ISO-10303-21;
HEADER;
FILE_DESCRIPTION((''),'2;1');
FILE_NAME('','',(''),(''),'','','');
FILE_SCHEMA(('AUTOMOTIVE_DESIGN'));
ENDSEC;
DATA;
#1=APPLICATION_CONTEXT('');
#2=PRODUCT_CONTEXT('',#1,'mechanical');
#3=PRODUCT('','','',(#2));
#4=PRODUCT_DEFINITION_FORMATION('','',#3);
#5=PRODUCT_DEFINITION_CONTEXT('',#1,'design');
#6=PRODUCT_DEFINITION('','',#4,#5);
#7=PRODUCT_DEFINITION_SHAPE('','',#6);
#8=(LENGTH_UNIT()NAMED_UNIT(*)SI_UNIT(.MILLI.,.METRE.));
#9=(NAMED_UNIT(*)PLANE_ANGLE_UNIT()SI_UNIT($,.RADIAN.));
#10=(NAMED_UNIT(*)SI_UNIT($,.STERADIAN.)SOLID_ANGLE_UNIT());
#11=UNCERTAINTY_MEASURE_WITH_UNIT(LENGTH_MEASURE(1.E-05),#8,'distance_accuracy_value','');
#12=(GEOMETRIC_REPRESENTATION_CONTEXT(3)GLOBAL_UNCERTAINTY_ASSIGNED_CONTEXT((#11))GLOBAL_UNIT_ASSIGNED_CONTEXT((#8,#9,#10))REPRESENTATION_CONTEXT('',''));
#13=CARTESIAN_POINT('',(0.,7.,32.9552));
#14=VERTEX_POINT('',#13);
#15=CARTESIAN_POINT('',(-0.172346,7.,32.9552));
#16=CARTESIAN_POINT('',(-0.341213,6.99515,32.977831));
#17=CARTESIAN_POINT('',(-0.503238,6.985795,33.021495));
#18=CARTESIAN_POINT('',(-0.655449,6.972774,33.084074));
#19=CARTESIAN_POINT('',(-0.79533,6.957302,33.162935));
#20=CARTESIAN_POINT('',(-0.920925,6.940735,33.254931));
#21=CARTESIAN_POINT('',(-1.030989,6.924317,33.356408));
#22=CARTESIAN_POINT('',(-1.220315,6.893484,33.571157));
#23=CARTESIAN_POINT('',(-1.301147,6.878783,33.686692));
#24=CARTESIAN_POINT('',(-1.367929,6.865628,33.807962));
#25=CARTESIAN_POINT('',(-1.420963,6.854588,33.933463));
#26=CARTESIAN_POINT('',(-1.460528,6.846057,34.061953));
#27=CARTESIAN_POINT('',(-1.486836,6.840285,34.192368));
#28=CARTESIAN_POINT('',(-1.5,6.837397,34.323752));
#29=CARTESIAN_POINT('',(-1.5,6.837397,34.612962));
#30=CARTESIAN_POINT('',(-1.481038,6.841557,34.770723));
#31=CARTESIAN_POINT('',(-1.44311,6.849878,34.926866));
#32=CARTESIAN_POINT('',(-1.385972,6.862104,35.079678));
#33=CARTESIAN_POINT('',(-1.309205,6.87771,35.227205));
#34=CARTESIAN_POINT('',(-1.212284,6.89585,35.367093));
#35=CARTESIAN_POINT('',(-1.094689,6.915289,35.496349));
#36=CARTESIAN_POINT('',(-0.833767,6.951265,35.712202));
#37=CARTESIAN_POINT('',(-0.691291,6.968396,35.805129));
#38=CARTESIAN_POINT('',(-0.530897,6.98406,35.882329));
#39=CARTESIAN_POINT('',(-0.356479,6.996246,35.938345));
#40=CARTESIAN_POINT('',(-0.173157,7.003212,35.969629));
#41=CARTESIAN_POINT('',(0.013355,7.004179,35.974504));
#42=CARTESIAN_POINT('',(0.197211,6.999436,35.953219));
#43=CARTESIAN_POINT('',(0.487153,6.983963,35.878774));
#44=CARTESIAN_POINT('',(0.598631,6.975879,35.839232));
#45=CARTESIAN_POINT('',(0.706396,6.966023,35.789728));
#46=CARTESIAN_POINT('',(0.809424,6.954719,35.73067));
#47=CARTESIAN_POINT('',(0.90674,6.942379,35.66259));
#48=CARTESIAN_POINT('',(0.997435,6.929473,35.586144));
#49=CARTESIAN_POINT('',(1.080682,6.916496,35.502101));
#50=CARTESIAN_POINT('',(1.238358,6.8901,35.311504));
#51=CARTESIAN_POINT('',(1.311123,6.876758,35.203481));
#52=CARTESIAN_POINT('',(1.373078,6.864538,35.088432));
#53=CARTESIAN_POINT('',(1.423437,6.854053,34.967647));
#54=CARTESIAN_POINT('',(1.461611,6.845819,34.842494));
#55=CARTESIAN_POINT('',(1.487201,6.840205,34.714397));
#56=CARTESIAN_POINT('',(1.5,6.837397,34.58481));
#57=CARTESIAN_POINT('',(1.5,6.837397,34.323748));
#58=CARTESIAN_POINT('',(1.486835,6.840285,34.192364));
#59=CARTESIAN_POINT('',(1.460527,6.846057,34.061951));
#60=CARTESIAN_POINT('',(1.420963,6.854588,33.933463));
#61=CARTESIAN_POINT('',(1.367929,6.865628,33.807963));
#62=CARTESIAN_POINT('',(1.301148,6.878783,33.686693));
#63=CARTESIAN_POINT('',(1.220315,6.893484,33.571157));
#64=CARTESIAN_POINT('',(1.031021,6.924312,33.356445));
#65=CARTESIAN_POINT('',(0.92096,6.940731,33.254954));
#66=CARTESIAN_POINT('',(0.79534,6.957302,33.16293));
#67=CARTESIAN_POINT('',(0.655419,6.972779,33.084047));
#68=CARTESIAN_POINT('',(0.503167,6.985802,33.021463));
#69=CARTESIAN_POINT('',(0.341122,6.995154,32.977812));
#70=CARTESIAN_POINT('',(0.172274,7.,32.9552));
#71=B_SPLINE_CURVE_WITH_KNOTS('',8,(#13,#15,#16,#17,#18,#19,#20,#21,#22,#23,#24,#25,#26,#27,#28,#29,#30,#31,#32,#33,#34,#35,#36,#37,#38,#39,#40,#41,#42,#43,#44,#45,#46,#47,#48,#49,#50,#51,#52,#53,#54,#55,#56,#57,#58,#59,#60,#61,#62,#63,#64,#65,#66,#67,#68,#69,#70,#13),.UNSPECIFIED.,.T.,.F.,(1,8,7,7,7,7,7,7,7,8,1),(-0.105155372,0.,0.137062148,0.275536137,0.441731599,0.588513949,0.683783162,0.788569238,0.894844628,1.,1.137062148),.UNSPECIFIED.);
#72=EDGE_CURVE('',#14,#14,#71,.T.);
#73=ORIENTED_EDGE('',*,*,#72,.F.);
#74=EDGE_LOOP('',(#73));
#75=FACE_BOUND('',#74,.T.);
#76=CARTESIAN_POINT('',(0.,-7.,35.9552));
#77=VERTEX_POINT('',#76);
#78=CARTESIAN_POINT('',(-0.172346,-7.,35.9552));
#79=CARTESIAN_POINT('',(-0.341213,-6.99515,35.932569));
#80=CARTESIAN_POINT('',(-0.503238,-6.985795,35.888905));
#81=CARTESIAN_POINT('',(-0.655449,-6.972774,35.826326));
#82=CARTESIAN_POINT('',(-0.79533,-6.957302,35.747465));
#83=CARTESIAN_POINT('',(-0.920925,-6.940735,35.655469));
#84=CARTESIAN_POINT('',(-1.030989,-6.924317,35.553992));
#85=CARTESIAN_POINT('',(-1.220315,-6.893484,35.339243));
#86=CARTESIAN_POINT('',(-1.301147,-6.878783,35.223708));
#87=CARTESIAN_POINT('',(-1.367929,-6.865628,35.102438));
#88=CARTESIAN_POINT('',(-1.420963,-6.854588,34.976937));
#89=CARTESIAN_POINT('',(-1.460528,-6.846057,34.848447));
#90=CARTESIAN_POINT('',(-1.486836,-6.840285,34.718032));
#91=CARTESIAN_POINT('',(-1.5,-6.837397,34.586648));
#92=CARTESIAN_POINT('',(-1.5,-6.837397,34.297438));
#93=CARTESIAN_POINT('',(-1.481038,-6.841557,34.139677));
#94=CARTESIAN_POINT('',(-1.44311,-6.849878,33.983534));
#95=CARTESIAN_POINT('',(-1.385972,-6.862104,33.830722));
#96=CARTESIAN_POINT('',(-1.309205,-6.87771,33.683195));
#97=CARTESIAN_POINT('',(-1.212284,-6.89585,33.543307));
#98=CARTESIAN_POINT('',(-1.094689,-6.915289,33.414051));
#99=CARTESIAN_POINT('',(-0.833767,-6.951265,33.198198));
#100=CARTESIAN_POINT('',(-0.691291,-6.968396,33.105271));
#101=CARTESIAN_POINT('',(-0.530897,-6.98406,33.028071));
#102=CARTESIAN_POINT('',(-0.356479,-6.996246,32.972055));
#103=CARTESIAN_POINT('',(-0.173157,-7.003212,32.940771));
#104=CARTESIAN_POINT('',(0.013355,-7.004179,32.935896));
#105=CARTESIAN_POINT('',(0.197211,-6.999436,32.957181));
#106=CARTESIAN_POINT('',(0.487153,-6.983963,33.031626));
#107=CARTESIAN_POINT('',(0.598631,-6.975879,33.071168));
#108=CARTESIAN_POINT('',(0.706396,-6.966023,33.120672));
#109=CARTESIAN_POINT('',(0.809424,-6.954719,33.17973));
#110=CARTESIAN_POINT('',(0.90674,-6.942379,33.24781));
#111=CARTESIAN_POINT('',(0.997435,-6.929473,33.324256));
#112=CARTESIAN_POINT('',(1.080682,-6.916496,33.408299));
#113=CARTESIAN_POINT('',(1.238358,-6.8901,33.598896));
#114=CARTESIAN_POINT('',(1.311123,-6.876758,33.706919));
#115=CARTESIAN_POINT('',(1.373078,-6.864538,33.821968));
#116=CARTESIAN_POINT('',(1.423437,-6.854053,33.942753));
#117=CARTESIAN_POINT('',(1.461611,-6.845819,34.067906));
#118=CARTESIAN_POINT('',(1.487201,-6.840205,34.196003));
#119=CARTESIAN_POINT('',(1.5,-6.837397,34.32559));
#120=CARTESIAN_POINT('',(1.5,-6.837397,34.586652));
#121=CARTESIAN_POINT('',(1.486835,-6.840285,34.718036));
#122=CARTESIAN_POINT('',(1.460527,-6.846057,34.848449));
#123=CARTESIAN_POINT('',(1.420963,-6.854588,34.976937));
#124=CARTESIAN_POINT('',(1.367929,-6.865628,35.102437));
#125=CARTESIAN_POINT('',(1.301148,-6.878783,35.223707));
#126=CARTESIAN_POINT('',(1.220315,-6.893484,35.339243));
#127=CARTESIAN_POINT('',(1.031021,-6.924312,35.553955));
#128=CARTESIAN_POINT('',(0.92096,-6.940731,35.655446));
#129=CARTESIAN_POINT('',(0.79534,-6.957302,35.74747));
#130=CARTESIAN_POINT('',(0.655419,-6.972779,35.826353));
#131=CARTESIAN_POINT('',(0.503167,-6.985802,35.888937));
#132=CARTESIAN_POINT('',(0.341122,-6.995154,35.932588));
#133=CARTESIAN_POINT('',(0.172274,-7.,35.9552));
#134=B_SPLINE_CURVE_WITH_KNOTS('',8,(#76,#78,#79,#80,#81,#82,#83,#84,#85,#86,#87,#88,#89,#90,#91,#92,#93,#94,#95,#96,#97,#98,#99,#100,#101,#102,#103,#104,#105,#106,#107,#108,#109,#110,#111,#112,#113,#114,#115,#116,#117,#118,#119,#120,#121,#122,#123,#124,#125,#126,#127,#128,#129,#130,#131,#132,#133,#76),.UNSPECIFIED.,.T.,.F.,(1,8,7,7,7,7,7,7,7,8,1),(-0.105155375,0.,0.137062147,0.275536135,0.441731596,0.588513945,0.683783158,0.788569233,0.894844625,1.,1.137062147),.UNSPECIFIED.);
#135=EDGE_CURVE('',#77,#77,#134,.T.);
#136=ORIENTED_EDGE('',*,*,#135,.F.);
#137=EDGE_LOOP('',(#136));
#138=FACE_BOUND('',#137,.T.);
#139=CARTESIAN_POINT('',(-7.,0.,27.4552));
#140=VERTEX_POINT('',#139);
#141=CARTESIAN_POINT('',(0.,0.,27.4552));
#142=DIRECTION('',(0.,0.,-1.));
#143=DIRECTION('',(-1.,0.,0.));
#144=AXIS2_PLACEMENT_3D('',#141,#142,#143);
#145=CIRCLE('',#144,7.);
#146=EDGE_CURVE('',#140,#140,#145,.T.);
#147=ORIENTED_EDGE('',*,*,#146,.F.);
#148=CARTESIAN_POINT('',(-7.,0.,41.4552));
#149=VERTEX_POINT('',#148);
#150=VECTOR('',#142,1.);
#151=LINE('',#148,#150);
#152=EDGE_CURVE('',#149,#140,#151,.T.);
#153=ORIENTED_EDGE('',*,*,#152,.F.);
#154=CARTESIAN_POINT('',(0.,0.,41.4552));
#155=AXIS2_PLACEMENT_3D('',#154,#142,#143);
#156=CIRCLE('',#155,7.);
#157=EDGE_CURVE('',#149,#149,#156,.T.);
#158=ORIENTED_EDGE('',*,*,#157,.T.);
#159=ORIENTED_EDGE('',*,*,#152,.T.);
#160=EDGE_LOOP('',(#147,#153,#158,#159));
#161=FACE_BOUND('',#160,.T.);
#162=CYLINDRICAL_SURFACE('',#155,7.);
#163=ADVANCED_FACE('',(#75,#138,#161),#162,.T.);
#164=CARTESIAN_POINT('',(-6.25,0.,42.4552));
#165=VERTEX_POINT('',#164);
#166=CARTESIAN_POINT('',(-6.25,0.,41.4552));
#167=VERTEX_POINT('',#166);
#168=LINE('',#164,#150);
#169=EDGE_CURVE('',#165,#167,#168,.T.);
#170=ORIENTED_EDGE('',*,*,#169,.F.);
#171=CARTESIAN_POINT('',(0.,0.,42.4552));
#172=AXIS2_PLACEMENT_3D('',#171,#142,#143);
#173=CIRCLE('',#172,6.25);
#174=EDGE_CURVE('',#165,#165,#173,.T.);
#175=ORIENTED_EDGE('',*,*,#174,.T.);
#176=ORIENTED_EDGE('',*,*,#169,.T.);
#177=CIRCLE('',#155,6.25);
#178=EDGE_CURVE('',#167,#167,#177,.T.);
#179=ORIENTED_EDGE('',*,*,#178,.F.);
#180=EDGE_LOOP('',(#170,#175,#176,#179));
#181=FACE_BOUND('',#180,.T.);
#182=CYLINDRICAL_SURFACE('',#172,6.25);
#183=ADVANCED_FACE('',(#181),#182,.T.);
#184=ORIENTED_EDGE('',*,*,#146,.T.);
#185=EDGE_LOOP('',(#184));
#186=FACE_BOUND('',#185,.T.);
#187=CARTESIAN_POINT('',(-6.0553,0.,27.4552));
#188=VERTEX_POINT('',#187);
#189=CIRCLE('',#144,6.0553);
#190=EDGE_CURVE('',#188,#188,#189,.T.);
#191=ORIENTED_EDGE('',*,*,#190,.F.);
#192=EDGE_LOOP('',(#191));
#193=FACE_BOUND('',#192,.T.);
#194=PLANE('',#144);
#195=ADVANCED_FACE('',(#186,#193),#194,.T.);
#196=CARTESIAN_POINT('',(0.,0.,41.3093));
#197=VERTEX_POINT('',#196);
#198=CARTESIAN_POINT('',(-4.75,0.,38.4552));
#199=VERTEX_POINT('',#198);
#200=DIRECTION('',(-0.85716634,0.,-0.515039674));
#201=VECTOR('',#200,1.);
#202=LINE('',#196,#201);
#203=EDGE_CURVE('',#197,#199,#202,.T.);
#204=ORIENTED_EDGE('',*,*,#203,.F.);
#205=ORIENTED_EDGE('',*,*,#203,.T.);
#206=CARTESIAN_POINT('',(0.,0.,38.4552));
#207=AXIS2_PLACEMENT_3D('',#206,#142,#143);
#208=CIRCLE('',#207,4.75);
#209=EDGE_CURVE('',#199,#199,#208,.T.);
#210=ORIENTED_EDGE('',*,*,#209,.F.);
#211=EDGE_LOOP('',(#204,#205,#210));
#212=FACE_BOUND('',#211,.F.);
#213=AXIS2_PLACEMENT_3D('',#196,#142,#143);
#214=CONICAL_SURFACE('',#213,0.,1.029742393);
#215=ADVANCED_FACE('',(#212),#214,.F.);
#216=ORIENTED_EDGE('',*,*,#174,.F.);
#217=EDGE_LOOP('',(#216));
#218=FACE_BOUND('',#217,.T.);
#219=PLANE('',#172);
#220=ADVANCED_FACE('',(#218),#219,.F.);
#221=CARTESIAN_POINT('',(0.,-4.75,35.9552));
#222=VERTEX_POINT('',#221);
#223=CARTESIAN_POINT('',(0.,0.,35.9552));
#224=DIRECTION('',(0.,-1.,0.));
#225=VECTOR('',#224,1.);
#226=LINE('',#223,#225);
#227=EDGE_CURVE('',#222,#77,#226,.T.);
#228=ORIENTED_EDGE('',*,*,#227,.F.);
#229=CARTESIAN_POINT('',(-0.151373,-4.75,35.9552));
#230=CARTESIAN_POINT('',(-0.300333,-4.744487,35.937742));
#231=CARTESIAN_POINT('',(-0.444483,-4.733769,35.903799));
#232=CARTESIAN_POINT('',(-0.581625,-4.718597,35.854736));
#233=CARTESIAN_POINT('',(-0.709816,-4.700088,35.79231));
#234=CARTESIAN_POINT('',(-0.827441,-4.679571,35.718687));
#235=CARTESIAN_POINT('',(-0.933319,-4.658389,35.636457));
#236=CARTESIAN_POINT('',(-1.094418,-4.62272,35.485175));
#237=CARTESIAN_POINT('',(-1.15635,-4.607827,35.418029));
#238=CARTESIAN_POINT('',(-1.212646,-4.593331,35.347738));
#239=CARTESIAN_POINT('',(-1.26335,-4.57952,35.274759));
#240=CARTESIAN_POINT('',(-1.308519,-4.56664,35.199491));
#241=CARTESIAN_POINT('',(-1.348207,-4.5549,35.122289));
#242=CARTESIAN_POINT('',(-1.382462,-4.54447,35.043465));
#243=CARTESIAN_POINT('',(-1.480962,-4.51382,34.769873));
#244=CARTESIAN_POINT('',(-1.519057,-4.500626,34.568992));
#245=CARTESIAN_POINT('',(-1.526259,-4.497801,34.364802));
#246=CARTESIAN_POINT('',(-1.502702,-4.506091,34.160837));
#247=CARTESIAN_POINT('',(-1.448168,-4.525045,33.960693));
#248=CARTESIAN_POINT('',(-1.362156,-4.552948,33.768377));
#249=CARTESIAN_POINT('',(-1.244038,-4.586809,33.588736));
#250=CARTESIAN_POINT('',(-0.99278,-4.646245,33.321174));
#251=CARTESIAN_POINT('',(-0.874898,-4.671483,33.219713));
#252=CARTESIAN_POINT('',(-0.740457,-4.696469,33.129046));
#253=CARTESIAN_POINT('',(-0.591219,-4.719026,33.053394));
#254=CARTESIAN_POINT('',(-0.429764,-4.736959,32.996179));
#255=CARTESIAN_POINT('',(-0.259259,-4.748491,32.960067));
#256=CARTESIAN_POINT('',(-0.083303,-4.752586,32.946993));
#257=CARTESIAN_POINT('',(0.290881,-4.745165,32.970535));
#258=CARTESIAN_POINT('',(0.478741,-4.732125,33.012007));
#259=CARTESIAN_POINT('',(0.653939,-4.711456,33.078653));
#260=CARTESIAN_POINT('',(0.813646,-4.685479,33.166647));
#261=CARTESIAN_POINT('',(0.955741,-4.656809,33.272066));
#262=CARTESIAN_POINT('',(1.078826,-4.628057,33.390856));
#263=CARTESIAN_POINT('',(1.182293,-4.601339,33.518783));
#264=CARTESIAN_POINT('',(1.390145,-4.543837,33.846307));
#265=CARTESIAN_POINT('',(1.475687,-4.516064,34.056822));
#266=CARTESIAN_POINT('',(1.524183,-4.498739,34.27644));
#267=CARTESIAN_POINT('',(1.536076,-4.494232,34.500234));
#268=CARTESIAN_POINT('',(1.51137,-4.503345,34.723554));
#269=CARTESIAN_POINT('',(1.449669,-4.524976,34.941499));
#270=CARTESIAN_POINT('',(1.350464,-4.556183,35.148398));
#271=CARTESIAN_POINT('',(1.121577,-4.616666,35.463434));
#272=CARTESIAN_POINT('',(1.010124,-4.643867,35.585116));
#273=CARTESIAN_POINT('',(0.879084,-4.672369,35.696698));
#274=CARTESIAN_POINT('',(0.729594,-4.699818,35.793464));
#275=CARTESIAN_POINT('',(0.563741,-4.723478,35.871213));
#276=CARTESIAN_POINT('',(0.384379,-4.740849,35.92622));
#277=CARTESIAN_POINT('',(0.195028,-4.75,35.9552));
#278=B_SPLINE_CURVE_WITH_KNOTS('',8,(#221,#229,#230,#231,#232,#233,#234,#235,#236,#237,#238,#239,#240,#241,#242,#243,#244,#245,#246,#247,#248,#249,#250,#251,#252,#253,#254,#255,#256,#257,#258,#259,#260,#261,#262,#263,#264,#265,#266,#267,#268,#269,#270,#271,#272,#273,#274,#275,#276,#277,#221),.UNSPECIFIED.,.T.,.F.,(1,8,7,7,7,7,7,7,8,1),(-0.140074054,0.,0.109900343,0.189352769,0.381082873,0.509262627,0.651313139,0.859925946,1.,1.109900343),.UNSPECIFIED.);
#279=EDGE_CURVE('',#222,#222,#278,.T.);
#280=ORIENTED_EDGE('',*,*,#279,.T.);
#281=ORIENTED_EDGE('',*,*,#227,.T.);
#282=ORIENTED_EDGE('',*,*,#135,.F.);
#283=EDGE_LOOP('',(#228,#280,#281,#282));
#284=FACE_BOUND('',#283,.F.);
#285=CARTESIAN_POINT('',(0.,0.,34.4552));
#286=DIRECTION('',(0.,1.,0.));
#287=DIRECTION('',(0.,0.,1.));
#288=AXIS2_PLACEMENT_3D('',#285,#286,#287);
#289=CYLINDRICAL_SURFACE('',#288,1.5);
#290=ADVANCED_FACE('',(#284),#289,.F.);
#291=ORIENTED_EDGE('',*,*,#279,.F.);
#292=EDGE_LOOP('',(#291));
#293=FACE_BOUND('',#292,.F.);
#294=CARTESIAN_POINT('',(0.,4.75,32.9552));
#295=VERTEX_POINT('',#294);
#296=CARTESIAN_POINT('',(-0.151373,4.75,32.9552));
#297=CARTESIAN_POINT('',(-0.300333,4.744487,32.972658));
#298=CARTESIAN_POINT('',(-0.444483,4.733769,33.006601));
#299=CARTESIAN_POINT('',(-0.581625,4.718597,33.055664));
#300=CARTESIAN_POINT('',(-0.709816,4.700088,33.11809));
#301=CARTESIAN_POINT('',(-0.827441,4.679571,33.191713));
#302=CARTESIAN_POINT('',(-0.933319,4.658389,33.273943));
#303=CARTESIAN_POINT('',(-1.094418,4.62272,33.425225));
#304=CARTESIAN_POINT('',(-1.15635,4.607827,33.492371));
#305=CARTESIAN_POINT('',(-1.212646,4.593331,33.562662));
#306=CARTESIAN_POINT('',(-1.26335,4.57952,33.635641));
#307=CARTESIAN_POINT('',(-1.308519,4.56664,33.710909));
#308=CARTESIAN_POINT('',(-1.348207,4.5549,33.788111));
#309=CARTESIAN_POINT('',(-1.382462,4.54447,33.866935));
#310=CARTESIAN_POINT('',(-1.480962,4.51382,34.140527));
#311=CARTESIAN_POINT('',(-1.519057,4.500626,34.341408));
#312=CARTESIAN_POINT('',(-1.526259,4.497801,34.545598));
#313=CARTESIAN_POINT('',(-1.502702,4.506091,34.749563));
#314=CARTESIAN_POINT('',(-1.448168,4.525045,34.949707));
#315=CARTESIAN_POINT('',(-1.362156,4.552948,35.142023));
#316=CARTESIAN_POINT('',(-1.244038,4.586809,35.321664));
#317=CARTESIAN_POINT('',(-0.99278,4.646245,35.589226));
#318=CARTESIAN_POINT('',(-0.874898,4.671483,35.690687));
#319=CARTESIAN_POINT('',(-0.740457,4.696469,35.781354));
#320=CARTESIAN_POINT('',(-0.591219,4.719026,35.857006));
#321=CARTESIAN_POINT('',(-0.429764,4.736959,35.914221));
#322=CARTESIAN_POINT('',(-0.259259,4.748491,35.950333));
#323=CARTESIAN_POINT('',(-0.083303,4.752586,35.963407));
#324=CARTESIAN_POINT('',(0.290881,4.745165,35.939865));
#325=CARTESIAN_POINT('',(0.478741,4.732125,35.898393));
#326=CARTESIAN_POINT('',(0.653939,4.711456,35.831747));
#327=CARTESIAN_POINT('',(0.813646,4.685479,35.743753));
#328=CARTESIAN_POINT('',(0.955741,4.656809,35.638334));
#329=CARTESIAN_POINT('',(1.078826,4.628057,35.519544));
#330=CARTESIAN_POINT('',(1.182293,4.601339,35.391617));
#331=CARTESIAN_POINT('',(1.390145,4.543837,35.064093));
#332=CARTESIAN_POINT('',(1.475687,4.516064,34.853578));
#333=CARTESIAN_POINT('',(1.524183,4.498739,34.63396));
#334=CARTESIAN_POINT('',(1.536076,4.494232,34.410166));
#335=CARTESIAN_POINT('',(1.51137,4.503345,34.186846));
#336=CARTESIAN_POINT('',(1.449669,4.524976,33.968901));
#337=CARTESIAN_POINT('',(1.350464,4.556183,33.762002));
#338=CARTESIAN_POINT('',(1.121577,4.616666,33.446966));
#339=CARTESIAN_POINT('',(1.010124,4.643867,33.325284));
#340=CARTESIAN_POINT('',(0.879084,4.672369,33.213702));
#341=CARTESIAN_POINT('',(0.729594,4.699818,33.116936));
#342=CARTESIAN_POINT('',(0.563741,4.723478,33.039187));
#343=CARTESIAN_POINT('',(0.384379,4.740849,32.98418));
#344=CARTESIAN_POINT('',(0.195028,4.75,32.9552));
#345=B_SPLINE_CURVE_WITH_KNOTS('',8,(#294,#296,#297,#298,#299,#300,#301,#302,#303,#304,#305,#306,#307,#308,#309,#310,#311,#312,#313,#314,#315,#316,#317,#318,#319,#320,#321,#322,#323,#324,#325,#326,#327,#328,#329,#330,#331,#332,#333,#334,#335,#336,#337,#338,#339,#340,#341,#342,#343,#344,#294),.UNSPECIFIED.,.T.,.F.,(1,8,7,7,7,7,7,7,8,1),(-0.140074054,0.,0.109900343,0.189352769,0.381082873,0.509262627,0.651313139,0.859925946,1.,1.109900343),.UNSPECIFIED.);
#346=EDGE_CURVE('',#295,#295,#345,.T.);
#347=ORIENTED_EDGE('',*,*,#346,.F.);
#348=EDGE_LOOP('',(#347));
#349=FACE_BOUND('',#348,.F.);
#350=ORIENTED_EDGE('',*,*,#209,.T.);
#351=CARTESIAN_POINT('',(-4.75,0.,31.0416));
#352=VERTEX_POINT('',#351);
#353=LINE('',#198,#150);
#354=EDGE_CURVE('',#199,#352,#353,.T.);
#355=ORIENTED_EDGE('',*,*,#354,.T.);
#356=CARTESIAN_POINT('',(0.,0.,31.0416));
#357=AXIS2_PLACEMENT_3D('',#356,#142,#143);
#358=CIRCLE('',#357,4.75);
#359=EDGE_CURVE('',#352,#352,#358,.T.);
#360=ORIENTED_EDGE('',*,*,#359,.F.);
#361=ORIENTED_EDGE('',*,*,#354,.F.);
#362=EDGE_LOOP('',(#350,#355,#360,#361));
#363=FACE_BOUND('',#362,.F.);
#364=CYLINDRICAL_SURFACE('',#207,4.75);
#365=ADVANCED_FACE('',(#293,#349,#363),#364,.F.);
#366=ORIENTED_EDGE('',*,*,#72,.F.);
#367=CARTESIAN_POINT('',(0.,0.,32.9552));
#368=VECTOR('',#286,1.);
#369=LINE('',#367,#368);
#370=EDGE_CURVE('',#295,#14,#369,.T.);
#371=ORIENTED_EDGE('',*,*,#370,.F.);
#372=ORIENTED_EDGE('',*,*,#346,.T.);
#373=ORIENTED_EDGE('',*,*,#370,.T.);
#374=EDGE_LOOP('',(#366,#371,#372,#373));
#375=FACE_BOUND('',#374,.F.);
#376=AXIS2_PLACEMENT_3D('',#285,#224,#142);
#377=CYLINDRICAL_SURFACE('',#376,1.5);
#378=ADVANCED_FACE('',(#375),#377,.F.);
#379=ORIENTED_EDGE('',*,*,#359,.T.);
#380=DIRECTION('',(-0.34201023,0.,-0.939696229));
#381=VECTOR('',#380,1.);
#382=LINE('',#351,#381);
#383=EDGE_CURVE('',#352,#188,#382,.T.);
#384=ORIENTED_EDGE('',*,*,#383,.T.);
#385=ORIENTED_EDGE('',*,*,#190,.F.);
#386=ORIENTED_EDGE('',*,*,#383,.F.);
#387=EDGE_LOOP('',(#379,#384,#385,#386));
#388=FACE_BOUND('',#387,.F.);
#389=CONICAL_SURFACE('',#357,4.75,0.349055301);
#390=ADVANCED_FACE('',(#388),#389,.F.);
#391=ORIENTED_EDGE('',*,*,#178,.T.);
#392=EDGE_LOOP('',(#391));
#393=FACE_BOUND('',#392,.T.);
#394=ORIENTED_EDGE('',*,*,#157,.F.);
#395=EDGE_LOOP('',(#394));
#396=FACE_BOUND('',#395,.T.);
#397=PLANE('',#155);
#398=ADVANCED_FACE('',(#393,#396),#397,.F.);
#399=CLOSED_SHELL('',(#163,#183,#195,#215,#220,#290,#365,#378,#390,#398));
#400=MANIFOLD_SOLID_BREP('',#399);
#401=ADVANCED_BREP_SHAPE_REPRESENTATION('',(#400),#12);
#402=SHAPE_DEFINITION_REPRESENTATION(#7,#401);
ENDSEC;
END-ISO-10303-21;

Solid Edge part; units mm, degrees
sketch "Sketch1" plane through (0, 0, 0) normal (0, -1, 0) x (1, 0, 0)
  line L0 (-4.75, 38.4552) -> (-4.75, 31.0416)
  line L1 (-4.75, 31.0416) -> (-6.0553, 27.4552)
  line L2 (-7, 27.4552) -> (-6.0553, 27.4552)
  line L3 (-7, 41.4552) -> (-7, 27.4552)
  line L4 (-6.25, 41.4552) -> (-7, 41.4552)
  line L5 (-6.25, 42.4552) -> (-6.25, 41.4552)
  line L6 (0, 42.4552) -> (-6.25, 42.4552)
  line L7 (0, 42.4552) -> (0, 41.3093)
  line L8 (0, 41.3093) -> (-4.75, 38.4552)
revolve "RevolvedProtrusion1" add sketch "Sketch1" angle 360 about axis through (0, 0, 42.4552) along (0, 0, -1)
hole "Hole1" at (0, 0, 34.4552) direction (0, -1, 0) diameter 3 end through all both ways yes
